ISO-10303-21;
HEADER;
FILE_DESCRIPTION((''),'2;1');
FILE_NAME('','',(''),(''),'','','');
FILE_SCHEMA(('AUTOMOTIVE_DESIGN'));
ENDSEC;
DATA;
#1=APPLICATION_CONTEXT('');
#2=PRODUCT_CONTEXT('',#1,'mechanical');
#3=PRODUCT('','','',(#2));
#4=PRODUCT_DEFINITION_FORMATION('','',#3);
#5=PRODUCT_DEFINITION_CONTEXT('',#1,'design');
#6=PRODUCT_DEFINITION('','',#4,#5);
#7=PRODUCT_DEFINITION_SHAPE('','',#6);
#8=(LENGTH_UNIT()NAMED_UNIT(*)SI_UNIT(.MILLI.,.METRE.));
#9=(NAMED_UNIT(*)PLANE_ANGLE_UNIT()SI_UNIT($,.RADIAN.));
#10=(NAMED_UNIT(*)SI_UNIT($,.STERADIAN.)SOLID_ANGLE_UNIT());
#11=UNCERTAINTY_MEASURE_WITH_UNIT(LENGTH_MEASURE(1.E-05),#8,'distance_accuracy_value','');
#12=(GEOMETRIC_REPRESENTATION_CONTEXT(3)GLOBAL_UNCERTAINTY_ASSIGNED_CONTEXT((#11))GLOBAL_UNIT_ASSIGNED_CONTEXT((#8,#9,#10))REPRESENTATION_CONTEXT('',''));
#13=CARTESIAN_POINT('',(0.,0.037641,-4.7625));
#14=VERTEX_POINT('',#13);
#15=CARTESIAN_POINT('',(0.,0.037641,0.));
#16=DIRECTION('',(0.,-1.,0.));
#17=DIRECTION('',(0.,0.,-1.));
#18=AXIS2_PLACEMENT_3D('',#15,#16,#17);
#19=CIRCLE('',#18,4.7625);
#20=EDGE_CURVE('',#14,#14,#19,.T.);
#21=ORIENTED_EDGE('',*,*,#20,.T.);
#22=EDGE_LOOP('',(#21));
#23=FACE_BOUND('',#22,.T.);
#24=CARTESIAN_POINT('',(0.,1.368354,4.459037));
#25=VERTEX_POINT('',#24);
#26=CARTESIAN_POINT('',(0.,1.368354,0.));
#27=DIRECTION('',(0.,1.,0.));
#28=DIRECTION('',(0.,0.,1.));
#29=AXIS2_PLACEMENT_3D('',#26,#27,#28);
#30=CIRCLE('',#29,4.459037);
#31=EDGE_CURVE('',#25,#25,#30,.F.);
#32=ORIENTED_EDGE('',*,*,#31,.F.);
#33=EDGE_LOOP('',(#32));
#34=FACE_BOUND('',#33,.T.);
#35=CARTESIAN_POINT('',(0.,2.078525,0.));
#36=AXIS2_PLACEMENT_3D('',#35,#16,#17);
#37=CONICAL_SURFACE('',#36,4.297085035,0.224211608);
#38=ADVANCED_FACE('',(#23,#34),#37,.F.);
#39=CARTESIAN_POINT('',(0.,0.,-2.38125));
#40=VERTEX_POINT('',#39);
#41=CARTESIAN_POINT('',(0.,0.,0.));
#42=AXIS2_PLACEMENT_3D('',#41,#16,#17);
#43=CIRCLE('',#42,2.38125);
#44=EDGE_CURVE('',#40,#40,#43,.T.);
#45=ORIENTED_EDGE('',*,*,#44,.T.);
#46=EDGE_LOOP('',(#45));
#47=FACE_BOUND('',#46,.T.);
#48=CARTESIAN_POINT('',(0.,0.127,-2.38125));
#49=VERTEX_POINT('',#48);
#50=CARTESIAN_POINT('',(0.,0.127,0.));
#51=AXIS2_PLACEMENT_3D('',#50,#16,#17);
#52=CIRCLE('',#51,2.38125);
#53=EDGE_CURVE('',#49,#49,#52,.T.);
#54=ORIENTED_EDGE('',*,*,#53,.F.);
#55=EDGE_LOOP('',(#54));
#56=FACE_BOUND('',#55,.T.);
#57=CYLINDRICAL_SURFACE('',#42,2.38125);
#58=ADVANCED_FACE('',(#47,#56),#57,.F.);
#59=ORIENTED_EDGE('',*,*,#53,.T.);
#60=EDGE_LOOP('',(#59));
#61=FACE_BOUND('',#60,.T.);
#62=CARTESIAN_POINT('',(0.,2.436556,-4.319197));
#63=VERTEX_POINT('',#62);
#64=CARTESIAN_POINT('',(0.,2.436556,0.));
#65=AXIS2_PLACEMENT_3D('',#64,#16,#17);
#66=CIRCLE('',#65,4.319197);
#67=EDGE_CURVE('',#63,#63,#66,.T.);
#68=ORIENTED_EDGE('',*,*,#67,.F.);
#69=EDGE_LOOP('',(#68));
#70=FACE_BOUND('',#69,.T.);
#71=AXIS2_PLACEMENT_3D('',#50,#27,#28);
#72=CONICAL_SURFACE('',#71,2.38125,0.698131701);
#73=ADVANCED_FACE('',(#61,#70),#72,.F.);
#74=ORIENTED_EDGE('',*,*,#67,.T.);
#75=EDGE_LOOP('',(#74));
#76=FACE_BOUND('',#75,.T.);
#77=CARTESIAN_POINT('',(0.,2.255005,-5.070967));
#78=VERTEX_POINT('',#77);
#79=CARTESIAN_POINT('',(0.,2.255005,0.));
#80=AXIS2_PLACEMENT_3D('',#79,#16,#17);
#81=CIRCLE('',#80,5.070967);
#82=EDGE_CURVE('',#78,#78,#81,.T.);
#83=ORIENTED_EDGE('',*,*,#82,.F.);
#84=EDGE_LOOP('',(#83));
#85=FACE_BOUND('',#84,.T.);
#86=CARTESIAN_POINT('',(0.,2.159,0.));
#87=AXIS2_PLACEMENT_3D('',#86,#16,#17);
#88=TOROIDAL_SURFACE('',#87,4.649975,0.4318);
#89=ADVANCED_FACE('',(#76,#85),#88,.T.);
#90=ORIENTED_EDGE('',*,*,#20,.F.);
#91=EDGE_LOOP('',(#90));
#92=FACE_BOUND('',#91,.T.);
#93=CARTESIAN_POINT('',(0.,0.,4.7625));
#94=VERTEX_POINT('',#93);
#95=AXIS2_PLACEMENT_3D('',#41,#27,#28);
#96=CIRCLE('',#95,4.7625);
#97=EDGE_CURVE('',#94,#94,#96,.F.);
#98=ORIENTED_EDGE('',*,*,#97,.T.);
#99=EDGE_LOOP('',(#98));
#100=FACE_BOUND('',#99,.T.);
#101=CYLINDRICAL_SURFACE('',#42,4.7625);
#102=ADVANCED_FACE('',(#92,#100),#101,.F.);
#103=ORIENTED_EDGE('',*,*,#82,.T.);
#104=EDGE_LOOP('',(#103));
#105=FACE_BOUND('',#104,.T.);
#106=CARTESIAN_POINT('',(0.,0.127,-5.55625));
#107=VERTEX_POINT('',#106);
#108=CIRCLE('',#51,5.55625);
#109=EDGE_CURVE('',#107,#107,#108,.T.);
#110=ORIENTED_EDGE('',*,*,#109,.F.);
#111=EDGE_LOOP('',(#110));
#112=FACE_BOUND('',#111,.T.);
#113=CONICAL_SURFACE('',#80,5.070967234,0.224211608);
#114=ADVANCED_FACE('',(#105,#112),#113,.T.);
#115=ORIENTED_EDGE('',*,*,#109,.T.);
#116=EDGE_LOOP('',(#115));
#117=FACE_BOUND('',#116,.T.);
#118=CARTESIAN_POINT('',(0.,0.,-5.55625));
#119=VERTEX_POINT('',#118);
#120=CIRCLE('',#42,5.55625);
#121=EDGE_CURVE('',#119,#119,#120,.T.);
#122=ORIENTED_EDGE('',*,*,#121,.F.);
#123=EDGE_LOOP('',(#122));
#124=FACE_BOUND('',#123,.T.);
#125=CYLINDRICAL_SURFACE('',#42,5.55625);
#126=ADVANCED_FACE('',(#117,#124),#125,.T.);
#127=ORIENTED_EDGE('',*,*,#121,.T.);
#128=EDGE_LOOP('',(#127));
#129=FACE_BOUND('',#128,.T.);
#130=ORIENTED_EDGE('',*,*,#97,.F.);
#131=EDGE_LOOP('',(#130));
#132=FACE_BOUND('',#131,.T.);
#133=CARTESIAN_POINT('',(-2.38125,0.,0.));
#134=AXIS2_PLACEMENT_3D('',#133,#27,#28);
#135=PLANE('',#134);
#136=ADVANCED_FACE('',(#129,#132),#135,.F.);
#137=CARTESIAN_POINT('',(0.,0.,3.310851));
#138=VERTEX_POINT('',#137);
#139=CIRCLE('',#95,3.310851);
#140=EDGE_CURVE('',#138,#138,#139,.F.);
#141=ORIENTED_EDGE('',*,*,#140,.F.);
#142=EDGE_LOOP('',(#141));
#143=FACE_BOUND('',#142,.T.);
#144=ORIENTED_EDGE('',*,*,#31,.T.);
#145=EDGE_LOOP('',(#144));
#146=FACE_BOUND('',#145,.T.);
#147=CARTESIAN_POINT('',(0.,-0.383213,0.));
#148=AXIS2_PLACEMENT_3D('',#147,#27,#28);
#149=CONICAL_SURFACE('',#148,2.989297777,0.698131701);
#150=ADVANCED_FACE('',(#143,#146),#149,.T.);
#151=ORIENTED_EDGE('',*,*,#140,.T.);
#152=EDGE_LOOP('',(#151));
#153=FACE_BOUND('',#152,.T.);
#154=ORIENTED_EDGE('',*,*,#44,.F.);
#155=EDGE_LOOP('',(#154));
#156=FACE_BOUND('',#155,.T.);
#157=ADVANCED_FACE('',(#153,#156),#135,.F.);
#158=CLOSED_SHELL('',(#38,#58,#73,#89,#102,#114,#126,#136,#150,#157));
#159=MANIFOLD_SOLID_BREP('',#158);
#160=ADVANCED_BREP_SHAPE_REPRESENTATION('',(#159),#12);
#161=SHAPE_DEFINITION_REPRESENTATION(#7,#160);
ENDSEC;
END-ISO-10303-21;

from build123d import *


# Read off the part's stored shape, not the designer's step: Shell2
with BuildPart() as part:
    # Sketch1 → Revolve1 (revolve)
    with BuildSketch(Plane.XY, mode=Mode.PRIVATE) as revolve1_sk:
        with BuildLine():
            Line((-5.55625, 0), (-5.55625, 0.127))
            Line((-5.55625, 0.127), (-5.070967234, 2.25500545))
            ThreePointArc((-5.070967234, 2.25500545), (-4.751339811, 2.57873382), (-4.319197328, 2.43655569))
            Line((-4.319197328, 2.43655569), (-2.38125, 0.127))
            Line((-2.38125, 0.127), (-2.38125, 0))
            Line((-2.38125, 0), (-5.55625, 0))
        make_face()
    revolve(revolve1_sk.sketch.rotate(Axis((0, 0, 0), (0, 1, 0)), 270), axis=Axis((0, 0, 0), (0, 1, 0)))

    # Shell2 outline → Shell2 (revolve, cut)
    with BuildSketch(Plane.XY):
        Polygon((4.459036573, 1.368353826), (3.310851383, 0), (4.7625, 0), (4.7625, 0.03764136), align=None)
    revolve(axis=Axis((0, 0, 0), (0, 1, 0)), mode=Mode.SUBTRACT)


solid = part.part
